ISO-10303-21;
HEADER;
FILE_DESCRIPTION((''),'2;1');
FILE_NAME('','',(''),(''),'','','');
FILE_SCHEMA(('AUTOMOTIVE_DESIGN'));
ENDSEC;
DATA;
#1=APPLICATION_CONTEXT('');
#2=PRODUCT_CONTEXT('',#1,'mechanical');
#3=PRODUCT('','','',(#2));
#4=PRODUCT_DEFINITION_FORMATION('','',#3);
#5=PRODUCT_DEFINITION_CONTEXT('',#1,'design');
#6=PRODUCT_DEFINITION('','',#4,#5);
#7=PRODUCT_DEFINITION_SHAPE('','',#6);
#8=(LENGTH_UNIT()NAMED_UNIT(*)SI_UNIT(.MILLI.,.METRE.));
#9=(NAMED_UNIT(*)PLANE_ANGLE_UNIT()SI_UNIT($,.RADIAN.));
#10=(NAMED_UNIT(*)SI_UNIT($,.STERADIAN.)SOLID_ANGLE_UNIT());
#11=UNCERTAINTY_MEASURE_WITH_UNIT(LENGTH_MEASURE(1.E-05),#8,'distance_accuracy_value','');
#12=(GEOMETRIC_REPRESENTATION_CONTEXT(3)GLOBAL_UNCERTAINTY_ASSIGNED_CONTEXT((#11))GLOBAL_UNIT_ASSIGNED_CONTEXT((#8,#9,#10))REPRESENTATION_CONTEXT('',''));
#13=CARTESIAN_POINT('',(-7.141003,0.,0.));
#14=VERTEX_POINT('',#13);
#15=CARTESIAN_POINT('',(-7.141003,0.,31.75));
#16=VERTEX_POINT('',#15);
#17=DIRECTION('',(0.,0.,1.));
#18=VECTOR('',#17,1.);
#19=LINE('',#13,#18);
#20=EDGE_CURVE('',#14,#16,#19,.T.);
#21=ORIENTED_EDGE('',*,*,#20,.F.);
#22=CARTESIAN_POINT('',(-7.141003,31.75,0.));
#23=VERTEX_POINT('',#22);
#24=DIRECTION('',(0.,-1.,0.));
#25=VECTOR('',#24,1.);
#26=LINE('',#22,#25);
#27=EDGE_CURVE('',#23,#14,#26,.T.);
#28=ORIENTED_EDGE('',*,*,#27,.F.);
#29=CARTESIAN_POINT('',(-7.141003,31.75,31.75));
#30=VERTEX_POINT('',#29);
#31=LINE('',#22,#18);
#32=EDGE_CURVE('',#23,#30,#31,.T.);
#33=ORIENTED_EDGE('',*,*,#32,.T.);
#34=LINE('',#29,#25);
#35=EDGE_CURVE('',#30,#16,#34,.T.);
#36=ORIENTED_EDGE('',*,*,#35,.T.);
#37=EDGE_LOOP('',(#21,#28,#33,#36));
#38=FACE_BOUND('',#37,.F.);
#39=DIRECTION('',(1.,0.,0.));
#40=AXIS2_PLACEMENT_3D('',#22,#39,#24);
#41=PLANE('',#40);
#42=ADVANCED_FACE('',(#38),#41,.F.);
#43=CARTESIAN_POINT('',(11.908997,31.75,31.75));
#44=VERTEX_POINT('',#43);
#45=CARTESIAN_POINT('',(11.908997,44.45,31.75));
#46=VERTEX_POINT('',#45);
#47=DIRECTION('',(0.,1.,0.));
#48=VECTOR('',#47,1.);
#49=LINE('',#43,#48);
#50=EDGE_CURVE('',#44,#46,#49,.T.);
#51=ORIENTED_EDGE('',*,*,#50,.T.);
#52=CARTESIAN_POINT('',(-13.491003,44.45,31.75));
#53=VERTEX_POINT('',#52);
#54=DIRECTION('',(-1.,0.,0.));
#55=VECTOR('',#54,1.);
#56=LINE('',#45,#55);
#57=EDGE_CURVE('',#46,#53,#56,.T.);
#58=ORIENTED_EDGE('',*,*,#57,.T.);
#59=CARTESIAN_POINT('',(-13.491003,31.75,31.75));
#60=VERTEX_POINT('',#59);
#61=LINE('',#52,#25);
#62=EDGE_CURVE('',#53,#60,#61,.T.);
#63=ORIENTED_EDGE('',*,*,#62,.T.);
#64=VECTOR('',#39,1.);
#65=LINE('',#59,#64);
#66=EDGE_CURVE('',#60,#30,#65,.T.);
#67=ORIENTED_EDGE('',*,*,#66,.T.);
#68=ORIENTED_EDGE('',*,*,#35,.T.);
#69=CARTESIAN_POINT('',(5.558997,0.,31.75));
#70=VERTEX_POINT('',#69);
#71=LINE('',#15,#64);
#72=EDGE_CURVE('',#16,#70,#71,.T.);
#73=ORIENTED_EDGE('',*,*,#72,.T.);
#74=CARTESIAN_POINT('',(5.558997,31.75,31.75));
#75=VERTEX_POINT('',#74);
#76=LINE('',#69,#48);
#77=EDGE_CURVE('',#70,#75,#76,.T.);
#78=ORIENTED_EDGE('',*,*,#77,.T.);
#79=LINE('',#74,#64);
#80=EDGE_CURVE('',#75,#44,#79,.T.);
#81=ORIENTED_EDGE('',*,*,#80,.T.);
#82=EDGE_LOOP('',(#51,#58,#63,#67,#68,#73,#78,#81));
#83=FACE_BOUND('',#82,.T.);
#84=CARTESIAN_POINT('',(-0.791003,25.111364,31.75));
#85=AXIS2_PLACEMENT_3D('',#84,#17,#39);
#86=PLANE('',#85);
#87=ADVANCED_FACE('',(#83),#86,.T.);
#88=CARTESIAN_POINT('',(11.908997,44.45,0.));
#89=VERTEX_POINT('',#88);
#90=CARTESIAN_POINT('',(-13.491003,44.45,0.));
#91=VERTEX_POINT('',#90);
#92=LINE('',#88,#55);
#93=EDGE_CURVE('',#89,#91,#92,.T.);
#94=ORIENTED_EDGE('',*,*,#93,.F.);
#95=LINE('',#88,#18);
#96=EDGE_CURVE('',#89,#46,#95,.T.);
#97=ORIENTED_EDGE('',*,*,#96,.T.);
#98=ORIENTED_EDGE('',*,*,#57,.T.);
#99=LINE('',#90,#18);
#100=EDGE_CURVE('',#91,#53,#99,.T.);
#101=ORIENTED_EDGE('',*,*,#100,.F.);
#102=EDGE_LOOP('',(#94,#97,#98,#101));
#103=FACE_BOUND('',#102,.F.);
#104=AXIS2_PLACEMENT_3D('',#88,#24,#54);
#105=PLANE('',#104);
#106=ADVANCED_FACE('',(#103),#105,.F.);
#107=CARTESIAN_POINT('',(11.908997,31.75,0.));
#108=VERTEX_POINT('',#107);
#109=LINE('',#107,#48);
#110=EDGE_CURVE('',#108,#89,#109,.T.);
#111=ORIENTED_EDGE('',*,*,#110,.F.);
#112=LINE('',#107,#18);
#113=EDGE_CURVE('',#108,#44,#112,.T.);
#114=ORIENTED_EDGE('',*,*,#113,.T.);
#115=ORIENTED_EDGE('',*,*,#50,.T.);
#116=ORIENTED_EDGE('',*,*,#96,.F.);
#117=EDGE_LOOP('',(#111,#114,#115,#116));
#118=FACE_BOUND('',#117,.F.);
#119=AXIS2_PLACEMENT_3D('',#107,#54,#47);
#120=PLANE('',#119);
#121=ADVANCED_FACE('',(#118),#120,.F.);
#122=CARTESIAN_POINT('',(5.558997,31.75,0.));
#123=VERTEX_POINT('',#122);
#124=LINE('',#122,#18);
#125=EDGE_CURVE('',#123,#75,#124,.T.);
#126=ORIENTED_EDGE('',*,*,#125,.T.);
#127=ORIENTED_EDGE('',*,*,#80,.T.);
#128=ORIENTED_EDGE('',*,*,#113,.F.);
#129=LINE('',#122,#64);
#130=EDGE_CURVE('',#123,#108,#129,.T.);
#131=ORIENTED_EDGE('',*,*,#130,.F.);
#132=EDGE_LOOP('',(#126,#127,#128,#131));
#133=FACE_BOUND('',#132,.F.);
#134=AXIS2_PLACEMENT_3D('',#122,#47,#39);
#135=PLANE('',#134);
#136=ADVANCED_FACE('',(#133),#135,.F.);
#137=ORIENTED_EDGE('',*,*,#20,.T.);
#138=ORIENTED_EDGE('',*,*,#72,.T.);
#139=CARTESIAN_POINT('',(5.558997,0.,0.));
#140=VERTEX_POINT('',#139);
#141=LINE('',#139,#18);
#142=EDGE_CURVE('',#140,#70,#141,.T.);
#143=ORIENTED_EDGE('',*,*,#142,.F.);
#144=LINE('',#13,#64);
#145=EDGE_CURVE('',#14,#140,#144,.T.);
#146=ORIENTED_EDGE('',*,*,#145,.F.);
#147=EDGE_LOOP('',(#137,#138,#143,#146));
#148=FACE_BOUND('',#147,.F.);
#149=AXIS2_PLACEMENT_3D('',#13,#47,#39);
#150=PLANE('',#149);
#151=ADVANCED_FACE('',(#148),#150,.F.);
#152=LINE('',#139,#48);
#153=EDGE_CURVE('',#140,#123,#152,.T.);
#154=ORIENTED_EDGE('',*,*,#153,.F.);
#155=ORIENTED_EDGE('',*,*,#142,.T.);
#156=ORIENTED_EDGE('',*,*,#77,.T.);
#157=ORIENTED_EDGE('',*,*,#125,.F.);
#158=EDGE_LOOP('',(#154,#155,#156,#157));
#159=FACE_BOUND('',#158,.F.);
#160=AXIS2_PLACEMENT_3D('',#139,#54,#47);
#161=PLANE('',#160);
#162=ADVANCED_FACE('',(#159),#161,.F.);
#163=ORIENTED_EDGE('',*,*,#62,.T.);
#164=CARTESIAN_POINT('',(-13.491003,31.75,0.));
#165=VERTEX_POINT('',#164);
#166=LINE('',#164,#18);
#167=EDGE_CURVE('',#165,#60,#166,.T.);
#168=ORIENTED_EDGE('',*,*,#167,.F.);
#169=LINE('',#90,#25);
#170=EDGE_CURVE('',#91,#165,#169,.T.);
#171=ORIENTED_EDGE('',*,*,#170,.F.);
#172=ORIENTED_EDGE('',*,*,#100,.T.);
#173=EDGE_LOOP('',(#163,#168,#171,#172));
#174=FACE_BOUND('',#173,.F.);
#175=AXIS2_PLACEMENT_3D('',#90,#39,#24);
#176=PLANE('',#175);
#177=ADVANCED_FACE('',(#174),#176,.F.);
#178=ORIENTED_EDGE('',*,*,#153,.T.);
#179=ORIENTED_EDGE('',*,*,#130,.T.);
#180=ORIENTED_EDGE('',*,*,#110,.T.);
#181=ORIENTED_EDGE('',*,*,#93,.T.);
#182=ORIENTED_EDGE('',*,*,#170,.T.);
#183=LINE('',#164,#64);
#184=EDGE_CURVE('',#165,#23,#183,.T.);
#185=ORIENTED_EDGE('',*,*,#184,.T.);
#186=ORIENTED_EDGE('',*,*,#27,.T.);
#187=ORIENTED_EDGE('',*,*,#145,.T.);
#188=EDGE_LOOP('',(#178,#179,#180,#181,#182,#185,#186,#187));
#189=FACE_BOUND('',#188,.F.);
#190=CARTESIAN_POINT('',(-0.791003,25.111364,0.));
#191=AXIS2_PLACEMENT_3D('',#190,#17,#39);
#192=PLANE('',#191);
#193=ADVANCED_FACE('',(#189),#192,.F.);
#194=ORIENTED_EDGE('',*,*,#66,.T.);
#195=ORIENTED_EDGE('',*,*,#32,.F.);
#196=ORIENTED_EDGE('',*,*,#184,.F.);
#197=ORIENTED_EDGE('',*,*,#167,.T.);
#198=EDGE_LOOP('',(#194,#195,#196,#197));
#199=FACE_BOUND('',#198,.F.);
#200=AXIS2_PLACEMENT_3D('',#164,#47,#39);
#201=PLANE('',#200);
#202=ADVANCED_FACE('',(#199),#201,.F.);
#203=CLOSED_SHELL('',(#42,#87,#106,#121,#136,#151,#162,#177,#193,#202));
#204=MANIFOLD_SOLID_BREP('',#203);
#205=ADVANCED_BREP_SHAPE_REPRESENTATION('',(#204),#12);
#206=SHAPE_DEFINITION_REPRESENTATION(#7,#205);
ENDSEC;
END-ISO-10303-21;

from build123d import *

# Parameters (mm, degrees)
F1_DEPTH = 31.75


# Not quite as in the source:
# - a length typed as a fraction of an inch, garbled in the dataset ("3 / 203.2 mm" for 3/8 in), is restored


with BuildPart() as f1:
    # F0 (on Top) → F1 (new body)
    with BuildSketch(Plane.XY):
        Polygon((11.9089967117, 44.45), (0, 44.45), (-13.4910032883, 44.45), (-13.4910032883, 31.75), (-7.1410032883, 31.75), (-7.1410032883, 0), (5.5589967117, 0), (5.5589967117, 31.75), (11.9089967117, 31.75), align=None)
    extrude(amount=F1_DEPTH)


solid = f1.part
